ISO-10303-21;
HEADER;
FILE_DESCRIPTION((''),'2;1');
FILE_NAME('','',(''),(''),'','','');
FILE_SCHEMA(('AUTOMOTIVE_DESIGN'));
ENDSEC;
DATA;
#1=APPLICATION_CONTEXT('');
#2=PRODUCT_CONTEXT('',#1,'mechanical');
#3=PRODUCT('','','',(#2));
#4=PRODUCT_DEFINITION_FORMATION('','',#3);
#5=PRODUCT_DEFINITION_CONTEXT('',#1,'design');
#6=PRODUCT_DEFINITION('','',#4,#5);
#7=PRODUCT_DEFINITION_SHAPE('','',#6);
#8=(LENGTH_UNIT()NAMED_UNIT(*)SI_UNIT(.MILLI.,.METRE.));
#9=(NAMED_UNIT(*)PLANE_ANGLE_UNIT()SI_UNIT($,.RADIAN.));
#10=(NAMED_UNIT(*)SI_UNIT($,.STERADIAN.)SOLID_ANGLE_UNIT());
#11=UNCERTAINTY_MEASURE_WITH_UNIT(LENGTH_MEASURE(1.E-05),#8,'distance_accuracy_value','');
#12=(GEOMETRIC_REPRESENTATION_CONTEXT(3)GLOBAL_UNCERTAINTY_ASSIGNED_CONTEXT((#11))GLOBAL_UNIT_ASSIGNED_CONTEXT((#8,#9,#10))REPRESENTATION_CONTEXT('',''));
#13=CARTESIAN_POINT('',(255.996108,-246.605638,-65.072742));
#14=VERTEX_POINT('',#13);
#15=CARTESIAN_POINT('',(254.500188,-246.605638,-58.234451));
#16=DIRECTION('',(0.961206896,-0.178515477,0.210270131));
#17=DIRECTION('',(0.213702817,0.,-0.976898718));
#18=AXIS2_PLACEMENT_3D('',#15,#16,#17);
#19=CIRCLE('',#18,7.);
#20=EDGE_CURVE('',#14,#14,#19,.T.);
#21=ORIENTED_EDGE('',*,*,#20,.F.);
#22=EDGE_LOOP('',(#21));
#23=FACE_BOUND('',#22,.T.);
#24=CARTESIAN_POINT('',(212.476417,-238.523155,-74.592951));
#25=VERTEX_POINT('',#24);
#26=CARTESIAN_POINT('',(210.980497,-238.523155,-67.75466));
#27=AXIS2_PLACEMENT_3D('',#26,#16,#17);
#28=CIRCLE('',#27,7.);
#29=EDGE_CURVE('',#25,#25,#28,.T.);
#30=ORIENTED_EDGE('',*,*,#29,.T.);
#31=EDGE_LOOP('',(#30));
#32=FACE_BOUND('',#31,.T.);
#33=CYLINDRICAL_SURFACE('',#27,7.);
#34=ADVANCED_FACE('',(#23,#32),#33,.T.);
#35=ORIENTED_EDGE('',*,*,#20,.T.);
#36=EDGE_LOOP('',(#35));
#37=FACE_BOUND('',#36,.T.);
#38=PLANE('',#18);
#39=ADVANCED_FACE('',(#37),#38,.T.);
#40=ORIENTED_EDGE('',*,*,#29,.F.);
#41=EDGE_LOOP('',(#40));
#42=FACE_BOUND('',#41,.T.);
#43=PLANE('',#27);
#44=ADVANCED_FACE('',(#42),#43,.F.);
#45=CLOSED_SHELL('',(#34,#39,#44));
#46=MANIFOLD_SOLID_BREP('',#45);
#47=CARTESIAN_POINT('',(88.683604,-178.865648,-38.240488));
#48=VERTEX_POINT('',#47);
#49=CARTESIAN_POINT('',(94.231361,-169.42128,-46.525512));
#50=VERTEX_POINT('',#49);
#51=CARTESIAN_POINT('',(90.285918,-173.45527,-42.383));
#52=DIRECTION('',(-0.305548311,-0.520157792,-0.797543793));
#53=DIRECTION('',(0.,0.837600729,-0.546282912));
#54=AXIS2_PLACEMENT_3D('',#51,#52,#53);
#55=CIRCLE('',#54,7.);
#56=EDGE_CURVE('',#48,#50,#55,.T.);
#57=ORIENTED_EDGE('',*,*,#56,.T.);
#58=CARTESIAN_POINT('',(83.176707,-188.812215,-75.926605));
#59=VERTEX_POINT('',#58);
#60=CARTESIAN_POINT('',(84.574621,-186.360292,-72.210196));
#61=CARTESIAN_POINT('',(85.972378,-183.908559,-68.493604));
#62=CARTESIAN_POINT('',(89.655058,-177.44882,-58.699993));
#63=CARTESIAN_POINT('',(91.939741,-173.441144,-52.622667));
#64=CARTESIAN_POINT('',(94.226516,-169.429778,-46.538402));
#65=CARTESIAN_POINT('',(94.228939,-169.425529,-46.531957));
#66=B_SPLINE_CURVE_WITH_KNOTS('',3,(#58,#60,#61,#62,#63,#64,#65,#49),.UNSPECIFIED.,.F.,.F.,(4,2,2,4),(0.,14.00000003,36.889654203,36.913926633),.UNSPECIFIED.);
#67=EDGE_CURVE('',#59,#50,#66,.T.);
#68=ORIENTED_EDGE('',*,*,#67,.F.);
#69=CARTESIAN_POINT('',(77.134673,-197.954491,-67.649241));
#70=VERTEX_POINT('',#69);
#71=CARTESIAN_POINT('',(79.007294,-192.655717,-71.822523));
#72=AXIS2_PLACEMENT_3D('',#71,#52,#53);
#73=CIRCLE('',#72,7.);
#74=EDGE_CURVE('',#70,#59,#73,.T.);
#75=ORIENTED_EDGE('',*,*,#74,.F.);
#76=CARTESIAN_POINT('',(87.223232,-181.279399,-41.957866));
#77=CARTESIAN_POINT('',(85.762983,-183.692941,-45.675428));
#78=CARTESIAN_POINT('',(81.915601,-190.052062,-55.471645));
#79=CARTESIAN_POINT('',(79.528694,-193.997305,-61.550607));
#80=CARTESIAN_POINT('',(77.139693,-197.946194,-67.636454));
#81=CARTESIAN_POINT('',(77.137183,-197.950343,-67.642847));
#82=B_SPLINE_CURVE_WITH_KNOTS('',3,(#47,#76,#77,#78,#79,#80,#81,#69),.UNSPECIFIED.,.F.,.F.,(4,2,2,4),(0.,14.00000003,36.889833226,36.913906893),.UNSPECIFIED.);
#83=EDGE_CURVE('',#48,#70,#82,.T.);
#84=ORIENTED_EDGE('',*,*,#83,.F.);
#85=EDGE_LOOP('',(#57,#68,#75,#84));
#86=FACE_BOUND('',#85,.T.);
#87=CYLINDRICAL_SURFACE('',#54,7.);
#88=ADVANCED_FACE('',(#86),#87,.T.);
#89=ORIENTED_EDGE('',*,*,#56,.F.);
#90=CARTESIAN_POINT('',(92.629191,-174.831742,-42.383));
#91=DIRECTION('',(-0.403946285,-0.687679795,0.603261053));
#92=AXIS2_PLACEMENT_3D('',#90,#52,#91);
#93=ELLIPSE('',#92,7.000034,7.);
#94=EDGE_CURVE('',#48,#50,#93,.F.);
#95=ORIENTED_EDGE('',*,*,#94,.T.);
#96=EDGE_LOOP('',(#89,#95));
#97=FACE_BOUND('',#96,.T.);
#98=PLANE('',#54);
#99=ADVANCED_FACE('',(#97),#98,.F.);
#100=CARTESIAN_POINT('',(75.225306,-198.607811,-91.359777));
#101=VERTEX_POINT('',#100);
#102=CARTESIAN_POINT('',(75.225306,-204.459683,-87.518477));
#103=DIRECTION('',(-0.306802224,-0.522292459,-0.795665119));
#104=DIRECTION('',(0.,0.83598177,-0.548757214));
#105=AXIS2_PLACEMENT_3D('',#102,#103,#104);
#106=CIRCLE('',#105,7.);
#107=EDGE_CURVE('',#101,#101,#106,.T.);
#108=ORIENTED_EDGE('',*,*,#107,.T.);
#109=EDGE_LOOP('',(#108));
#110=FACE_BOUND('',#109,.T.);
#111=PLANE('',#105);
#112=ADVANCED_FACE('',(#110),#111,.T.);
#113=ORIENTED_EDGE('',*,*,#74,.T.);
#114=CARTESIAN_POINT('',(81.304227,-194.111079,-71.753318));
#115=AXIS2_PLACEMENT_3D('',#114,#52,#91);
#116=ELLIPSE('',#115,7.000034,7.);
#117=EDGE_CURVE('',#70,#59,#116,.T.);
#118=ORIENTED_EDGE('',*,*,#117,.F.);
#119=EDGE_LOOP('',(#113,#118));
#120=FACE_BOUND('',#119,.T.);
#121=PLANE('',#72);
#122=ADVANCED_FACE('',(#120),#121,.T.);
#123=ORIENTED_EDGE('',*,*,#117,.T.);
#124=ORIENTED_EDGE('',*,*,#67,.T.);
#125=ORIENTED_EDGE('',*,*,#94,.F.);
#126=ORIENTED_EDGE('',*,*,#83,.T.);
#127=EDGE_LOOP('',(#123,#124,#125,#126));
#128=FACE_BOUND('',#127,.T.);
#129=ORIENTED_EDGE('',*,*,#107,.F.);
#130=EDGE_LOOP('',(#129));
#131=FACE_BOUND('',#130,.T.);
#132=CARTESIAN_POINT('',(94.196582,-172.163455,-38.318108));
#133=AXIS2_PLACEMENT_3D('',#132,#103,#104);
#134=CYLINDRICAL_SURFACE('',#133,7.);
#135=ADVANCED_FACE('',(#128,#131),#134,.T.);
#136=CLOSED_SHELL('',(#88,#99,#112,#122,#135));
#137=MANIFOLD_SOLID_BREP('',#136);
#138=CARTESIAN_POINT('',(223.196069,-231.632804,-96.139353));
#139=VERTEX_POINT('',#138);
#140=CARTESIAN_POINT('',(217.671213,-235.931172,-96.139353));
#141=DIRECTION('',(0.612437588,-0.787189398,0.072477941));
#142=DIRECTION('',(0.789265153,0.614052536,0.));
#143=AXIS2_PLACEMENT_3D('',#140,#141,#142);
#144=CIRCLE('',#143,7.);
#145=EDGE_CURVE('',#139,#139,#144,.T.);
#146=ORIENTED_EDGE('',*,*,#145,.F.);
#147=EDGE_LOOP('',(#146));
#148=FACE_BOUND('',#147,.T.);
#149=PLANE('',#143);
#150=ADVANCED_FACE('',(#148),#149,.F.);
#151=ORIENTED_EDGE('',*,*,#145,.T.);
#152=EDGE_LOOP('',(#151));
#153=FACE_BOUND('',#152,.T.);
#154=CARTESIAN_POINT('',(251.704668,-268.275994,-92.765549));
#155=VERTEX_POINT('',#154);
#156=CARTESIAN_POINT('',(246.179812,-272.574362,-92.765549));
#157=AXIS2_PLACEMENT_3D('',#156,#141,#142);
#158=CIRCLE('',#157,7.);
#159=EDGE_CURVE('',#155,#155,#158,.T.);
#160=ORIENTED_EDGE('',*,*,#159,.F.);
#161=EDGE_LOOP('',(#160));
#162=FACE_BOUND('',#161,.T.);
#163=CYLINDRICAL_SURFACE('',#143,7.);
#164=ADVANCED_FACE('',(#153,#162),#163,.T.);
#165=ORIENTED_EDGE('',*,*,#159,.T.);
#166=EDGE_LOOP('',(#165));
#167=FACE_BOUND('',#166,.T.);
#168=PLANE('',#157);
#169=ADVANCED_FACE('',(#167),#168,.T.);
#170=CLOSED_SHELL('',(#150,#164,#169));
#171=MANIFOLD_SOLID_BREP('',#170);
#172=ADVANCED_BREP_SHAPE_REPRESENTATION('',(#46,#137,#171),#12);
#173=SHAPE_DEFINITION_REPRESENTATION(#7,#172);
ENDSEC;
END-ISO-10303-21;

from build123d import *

# Parameters (mm, degrees)
SUSP_FR_ROCKER_BRACKET_A_PROFILE_R     = 7
SUSP_FR_ROCKER_BRACKET_B_PROFILE_R     = 7
SUSP_FR_COILOVER_BRACKET_A_PROFILE_R   = 7
SUSP_FR_COILOVER_BRACKET_B_START       = -153.343858877
SUSP_FR_COILOVER_BRACKET_B_OUTLINE_R   = 7
SUSP_FR_COILOVER_BRACKET_B_DEPTH       = 56.748118524
SUSP_FR_COILOVER_BRACKET_B_START_2     = -96.439698882
SUSP_FR_COILOVER_BRACKET_B_2_OUTLINE_W = 17
SUSP_FR_COILOVER_BRACKET_B_2_OUTLINE_H = 17
SUSP_FR_COILOVER_BRACKET_B_2_DEPTH     = 1.439698882


with BuildPart() as part:
    # SUSP_FR_rocker_bracket_a: sweep along a curve in space
    with BuildLine() as susp_fr_rocker_bracket_a_path:
        Line((210.980497, -238.523155, -67.7546604), (254.500188, -246.605638, -58.2344508))
    # SUSP_FR_rocker_bracket_a profile (on start of the path) → SUSP_FR_rocker_bracket_a (sweep)
    with BuildSketch(Plane(origin=(210.980497, -238.523155, -67.7546604), x_dir=(-0.21370281690009318, 0, 0.9768987184191438), z_dir=(0.9612068958359004, -0.17851547693839223, 0.2102701307627194))):
        Circle(SUSP_FR_ROCKER_BRACKET_A_PROFILE_R)
    sweep(path=susp_fr_rocker_bracket_a_path.line)


with BuildPart() as body_2:
    # SUSP_FR_rocker_bracket_b: sweep along a curve in space
    with BuildLine() as susp_fr_rocker_bracket_b_path:
        Line((217.671213, -235.931172, -96.1393535), (246.179812, -272.574362, -92.7655492))
    # SUSP_FR_rocker_bracket_b profile (on start of the path) → SUSP_FR_rocker_bracket_b (sweep)
    with BuildSketch(Plane(origin=(217.671213, -235.931172, -96.1393535), x_dir=(-0.7892651534447245, -0.614052536480288, 0), z_dir=(0.6124375878865993, -0.7871893984011755, 0.07247794139211926))):
        Circle(SUSP_FR_ROCKER_BRACKET_B_PROFILE_R)
    sweep(path=susp_fr_rocker_bracket_b_path.line)


with BuildPart() as body_3:
    # SUSP_FR_coilover_bracket_a: sweep along a curve in space
    with BuildLine() as susp_fr_coilover_bracket_a_path:
        Line((90.2859184, -173.45527, -42.383), (79.0072944, -192.655717, -71.8225231))
    # SUSP_FR_coilover_bracket_a profile (on start of the path) → SUSP_FR_coilover_bracket_a (sweep)
    with BuildSketch(Plane(origin=(90.2859184, -173.45527, -42.383), x_dir=(0, -0.8376007285532237, 0.546282911619162), z_dir=(-0.3055483110770024, -0.5201577916573424, -0.7975437927638508))):
        Circle(SUSP_FR_COILOVER_BRACKET_A_PROFILE_R)
    sweep(path=susp_fr_coilover_bracket_a_path.line)

    # SUSP_FR_coilover_bracket_b: read off the stored shape, not the designer's step
    # SUSP_FR_coilover_bracket_b outline → SUSP_FR_coilover_bracket_b (add)
    with BuildSketch(Plane(origin=(0, 0, 0), x_dir=(0.9517732897377809, -0.16835993398862525, -0.2564810666873248), z_dir=(0.30680222447322997, 0.5222924589530519, 0.7956651194937808)).offset(SUSP_FR_COILOVER_BRACKET_B_START)):
        with Locations((128.467087626, -122.898172142)):
            Circle(SUSP_FR_COILOVER_BRACKET_B_OUTLINE_R)
    extrude(amount=SUSP_FR_COILOVER_BRACKET_B_DEPTH)

    # SUSP_FR_coilover_bracket_b 2 outline → SUSP_FR_coilover_bracket_b 2 (cut)
    with BuildSketch(Plane(origin=(0, 0, 0), x_dir=(0.9521765748000688, -0.16691582101546293, -0.25592748796630466), z_dir=(0.3055483110770031, 0.5201577916573431, 0.7975437927638501)).offset(SUSP_FR_COILOVER_BRACKET_B_START_2)):
        with Locations((128.5, -123.5)):
            Rectangle(SUSP_FR_COILOVER_BRACKET_B_2_OUTLINE_W, SUSP_FR_COILOVER_BRACKET_B_2_OUTLINE_H)
    extrude(amount=SUSP_FR_COILOVER_BRACKET_B_2_DEPTH, mode=Mode.SUBTRACT)


solid = Compound([part.part, body_2.part, body_3.part])
